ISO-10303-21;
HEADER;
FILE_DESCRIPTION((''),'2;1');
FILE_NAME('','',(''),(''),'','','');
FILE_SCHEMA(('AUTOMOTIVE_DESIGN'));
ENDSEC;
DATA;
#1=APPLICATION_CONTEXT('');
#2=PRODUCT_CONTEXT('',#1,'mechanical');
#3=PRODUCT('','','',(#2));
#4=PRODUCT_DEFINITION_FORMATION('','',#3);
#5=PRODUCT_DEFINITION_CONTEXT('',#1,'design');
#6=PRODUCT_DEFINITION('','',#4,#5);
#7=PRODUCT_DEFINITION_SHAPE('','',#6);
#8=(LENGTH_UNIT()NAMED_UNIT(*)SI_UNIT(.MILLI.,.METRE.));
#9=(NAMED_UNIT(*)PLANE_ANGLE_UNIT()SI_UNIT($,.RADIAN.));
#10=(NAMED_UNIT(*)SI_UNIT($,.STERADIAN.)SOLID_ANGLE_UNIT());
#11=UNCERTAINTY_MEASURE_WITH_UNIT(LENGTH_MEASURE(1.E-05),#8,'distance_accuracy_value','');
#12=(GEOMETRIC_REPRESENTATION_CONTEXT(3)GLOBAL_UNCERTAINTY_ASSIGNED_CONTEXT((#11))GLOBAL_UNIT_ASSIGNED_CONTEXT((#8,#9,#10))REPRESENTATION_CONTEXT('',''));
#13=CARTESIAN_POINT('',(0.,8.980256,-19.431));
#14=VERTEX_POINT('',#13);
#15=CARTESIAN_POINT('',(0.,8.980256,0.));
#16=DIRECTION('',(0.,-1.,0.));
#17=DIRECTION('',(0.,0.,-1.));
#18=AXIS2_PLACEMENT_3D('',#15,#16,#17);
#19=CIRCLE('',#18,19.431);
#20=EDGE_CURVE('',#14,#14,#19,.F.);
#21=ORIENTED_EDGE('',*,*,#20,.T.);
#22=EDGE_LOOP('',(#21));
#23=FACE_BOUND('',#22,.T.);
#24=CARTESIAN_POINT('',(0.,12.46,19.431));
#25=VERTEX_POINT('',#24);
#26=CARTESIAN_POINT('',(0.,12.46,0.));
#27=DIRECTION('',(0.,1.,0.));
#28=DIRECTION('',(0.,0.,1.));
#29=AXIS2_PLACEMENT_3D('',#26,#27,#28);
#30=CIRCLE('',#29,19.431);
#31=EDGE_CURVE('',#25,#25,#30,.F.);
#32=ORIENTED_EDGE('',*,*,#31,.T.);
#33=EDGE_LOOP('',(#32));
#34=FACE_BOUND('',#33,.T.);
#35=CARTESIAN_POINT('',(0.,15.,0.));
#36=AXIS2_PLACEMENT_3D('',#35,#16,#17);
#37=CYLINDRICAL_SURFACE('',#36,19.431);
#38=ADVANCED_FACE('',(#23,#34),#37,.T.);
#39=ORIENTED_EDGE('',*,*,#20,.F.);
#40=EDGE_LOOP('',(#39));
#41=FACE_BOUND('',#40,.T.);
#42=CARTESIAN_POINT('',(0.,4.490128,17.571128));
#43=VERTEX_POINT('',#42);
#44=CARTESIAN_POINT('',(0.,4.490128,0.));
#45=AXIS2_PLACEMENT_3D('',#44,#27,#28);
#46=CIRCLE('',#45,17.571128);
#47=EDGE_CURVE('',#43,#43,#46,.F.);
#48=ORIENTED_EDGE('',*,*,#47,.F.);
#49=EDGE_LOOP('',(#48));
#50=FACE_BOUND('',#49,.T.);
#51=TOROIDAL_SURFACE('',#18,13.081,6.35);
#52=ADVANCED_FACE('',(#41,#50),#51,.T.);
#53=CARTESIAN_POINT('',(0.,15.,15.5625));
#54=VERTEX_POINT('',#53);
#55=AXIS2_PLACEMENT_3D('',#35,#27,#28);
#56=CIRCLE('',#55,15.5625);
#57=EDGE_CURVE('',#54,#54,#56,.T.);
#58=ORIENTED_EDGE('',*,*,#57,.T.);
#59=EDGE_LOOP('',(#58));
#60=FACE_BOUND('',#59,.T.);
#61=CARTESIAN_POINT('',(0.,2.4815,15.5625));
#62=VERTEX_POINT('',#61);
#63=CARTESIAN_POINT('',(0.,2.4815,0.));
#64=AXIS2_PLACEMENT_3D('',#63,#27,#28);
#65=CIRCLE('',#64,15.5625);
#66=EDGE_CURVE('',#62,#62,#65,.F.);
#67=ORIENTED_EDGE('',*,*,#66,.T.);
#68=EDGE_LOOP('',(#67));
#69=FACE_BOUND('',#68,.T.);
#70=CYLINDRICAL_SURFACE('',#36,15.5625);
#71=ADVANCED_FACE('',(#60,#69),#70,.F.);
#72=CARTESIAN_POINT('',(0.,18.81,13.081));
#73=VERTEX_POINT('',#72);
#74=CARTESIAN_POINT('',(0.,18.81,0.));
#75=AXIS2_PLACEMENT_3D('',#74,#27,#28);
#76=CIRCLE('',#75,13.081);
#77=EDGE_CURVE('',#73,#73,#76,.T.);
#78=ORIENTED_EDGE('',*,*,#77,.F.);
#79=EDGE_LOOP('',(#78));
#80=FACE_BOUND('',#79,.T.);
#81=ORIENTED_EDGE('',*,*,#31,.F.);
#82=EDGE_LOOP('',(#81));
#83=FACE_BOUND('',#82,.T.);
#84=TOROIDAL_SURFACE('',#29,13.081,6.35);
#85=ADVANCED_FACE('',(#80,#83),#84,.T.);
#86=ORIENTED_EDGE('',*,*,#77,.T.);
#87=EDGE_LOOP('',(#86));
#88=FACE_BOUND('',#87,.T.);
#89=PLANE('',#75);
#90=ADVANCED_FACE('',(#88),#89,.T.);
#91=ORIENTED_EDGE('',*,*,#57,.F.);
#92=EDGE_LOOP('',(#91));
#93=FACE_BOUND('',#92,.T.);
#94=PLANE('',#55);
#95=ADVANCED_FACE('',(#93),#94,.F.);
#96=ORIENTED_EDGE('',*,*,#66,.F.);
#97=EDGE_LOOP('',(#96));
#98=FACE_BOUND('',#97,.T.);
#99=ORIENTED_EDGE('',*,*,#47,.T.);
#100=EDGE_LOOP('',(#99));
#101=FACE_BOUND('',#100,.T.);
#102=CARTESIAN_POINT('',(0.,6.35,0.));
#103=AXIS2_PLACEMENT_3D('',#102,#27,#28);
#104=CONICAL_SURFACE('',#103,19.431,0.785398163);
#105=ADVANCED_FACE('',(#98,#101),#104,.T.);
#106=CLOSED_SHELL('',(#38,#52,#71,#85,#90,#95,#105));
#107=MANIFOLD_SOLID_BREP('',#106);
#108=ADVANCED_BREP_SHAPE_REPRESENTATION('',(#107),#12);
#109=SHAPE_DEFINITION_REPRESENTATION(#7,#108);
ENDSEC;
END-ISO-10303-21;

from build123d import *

# Parameters (mm, degrees)
SKETCH1_R           = 19.431
SKETCH1_R_2         = 15.5625
BOSS_EXTRUDE1_DEPTH = 15
SKETCH2_R           = 19.431
BOSS_EXTRUDE2_DEPTH = 3.81
FILLET1_R           = 6.35
CHAMFER1_SIZE       = 6.35
FILLET2_R           = 6.35


with BuildPart() as part:
    # Sketch1 → Boss-Extrude1 (new body)
    with BuildSketch(Plane(origin=(0, 0, 0), x_dir=(1, 0, 0), z_dir=(0, 1, 0))):
        with Locations(Location((0, 0, 0), (0, 0, 270))):
            Circle(SKETCH1_R)
        with Locations(Location((0, 0, 0), (0, 0, 270))):
            Circle(SKETCH1_R_2, mode=Mode.SUBTRACT)
    extrude(amount=BOSS_EXTRUDE1_DEPTH)

    # Sketch2 → Boss-Extrude2 (add)
    with BuildSketch(Plane(origin=(0, 15, 0), x_dir=(1, 0, 0), z_dir=(0, 1, 0))):
        with Locations(Location((0, 0, 0), (0, 0, 270))):
            Circle(SKETCH2_R)
    extrude(amount=BOSS_EXTRUDE2_DEPTH)

    # Fillet1
    fillet1_edges = [part.edges().sort_by_distance(p)[0] for p in [
        (0, 18.81, -19.431),
    ]]
    fillet(fillet1_edges, radius=FILLET1_R)

    # Chamfer1
    # the kernel refuses this chamfer: 6.35 mm, written as the material it takes off along each edge
    with BuildSketch(Plane(origin=(0, 0, 0), x_dir=(0, 0, 1), z_dir=(-1, 0, 0))) as chamfer1_piece_1:
        Polygon((19.431, CHAMFER1_SIZE), (19.431 - CHAMFER1_SIZE, 0), (19.431, 0), align=None)
    revolve(axis=Axis((0, 0, 0), (0, 1, 0)), mode=Mode.SUBTRACT)

    # Fillet2
    fillet2_edges = [part.edges().sort_by_distance(p)[0] for p in [
        (0, 6.35, -19.431),
    ]]
    fillet(fillet2_edges, radius=FILLET2_R)


solid = part.part
